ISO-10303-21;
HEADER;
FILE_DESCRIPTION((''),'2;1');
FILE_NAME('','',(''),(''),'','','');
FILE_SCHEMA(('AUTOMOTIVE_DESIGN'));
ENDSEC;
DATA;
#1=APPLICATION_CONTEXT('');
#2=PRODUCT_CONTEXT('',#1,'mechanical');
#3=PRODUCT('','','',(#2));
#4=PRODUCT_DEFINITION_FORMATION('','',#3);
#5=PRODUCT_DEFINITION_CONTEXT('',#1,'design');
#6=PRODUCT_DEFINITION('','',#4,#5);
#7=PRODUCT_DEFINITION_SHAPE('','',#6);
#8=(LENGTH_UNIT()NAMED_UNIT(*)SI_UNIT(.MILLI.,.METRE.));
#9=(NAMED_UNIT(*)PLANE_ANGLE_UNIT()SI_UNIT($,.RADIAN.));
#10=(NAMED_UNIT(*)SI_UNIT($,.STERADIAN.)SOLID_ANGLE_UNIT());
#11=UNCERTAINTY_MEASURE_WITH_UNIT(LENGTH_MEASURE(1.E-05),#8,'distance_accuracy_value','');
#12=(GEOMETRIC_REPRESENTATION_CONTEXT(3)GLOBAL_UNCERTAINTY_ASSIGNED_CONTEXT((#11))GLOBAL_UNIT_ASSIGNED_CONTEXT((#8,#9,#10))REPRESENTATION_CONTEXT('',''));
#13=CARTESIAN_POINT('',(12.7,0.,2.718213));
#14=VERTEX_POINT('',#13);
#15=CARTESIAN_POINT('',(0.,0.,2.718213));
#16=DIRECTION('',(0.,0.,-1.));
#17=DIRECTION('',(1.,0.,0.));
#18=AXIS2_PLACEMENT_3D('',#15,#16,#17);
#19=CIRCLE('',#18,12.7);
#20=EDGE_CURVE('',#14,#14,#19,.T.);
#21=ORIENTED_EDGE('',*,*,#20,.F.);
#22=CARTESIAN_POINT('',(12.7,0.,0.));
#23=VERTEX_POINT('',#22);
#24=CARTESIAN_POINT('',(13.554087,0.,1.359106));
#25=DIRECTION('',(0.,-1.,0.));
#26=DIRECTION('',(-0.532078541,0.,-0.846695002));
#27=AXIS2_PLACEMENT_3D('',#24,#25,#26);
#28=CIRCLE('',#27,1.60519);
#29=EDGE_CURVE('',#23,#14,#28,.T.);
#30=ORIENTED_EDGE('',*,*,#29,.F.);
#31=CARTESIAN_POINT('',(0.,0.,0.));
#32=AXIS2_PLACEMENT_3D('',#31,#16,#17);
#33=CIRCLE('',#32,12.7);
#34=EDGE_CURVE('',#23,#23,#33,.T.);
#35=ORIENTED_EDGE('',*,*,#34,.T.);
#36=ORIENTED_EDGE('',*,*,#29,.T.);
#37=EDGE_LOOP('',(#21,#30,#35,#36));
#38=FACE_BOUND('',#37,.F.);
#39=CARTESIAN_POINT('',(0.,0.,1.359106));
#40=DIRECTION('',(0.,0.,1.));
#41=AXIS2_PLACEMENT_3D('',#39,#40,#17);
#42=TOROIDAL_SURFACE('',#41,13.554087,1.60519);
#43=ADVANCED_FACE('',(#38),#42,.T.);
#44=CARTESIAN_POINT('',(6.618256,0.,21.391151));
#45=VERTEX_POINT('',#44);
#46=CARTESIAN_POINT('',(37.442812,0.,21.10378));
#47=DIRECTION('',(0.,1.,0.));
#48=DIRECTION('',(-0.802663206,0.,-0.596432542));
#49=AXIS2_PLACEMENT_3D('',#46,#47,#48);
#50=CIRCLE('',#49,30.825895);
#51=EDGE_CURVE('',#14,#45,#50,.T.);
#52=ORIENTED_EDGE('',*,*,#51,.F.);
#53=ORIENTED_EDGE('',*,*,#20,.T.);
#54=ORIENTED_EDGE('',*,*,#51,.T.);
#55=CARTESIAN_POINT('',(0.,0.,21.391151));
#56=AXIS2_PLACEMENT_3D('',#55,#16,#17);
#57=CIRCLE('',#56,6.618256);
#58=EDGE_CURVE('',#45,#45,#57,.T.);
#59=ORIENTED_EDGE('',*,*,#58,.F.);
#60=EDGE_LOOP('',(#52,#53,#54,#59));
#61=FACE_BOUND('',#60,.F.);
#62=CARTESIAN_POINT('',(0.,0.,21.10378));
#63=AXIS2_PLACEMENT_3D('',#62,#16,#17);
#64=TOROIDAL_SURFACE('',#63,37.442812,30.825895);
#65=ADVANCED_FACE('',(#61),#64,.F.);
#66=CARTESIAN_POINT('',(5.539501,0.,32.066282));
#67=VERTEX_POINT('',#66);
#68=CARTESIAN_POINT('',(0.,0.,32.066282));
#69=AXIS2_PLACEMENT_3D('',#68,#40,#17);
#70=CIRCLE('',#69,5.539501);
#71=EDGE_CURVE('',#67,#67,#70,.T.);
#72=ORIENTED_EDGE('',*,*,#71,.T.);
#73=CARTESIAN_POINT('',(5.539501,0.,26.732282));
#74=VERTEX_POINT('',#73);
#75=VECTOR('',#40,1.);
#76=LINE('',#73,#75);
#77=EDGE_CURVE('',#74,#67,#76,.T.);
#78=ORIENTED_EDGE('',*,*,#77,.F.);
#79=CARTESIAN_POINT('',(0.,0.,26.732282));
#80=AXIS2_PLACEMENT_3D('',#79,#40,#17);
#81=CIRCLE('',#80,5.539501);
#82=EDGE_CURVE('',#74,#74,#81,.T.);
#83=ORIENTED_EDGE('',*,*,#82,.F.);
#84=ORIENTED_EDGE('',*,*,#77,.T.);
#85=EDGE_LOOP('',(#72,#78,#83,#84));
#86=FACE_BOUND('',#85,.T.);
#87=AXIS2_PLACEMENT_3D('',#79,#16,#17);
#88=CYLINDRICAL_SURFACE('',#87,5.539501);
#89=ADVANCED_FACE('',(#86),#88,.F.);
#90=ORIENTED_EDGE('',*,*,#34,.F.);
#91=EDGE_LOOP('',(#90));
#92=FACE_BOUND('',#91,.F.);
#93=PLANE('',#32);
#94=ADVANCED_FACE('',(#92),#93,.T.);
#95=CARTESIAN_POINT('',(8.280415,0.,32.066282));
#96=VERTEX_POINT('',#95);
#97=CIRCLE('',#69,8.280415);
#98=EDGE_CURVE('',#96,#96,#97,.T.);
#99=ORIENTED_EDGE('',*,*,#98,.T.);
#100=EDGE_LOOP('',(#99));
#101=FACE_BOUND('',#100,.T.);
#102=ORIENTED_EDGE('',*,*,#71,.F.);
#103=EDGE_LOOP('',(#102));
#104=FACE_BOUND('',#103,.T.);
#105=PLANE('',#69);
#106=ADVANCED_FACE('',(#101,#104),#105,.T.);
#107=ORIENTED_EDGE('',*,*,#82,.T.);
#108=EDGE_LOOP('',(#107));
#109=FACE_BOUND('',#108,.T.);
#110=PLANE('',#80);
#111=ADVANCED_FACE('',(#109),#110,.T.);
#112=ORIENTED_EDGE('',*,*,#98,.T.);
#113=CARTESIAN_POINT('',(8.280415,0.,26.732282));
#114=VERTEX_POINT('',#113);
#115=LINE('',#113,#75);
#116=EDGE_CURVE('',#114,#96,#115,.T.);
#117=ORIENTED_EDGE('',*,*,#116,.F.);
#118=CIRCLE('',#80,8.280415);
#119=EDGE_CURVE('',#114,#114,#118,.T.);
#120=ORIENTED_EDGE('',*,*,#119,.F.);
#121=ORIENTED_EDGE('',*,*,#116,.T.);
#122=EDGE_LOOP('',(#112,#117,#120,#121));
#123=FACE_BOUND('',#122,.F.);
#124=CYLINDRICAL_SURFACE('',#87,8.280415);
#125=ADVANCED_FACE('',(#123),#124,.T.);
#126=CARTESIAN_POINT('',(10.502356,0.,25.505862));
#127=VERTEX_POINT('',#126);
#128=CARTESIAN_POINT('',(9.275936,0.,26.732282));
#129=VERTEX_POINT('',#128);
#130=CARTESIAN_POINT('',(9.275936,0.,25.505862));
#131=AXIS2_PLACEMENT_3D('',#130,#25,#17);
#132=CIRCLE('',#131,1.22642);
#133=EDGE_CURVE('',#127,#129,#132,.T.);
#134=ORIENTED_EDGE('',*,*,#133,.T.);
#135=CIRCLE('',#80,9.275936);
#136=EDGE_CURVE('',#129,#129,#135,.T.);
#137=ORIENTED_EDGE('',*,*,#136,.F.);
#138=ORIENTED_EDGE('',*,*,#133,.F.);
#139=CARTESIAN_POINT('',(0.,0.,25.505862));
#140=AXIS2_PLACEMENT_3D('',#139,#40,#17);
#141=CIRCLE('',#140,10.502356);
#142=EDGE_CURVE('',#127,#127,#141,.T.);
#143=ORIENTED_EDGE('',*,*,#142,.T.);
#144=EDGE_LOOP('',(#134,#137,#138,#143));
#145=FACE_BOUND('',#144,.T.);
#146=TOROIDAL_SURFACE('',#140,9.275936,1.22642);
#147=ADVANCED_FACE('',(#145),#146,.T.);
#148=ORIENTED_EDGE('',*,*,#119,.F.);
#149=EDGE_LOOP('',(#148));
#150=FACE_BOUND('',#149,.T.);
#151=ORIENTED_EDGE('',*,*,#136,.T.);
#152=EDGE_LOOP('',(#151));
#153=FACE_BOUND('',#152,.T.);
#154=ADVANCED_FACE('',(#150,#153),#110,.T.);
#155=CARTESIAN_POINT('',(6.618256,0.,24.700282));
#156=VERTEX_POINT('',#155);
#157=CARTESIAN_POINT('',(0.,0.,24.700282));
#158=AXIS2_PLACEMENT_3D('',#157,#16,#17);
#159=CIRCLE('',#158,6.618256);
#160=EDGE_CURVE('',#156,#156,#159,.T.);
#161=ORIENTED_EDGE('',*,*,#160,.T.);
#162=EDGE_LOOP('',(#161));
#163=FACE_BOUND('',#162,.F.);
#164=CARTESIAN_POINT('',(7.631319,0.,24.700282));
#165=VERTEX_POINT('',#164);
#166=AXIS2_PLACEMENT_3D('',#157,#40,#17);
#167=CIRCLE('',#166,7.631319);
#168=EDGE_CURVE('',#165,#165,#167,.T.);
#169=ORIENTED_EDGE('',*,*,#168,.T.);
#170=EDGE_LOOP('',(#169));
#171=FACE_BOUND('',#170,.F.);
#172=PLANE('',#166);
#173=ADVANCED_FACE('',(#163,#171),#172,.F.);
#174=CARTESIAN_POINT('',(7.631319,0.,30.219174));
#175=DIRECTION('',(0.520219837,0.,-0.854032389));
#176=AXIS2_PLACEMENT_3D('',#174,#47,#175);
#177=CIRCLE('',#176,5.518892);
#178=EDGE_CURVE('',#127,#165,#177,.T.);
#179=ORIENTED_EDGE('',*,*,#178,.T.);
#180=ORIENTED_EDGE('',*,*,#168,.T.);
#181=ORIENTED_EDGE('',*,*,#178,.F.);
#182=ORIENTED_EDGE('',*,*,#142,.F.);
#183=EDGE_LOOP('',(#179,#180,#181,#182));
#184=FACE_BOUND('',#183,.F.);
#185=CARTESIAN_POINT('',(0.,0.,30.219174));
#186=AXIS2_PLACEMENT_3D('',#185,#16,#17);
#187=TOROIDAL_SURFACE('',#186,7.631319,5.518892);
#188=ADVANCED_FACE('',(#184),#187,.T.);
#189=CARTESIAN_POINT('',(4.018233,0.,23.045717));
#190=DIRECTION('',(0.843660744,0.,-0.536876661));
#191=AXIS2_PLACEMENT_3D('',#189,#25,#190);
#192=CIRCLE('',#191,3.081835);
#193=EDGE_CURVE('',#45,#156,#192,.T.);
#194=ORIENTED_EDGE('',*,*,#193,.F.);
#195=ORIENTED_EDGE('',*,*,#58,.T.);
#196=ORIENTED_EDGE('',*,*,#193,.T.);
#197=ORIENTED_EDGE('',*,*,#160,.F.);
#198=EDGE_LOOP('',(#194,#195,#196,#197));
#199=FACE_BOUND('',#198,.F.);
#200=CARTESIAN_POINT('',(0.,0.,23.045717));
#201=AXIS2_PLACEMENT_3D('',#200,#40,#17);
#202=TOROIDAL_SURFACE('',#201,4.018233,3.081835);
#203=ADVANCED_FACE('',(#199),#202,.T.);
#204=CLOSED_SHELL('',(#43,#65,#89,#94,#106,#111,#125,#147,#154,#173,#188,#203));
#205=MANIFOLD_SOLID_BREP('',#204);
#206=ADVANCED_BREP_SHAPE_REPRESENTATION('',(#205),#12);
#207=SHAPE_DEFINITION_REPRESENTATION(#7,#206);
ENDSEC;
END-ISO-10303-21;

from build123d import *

# Parameters (mm, degrees)
F2_R     = 10.5023561171
F3_DEPTH = 2.032
F4_R     = 1.2264204897
F6_R     = 8.280415088
F6_R_2   = 5.5395009723
F7_DEPTH = 5.334


# Not quite as in the source:
# - a fillet or chamfer that OpenCascade refuses, or shapes differently, is made with other operations: its cross-section is extruded or revolved along the edge and cut away or added


with BuildPart() as f1:
    # F0 (on Front) → F1 (revolve)
    with BuildSketch(Plane.XZ):
        with BuildLine():
            Line((0, 24.7002821416), (0, 0))
            Line((0, 0), (12.7, 0))
            ThreePointArc((12.7, 0), (15.1592770153, 1.3591062743), (12.7, 2.7182125486))
            ThreePointArc((12.7, 2.7182125486), (8.1323573281, 11.5574154189), (6.618256215, 21.3911514729))
            ThreePointArc((6.618256215, 21.3911514729), (7.1000680202, 23.0457168072), (6.618256215, 24.7002821416))
            Line((6.618256215, 24.7002821416), (0, 24.7002821416))
        make_face()
    revolve(axis=Axis((0, 0, 12.3501410708), (0, 0, -1)))

    # F2 (on face) → F3 (join)
    with BuildSketch(Plane.XY.offset(24.7002821416)):
        Circle(F2_R)
    extrude(amount=F3_DEPTH)

    # F4
    f4_edges = [f1.edges().sort_by_distance(p)[0] for p in [
        (-10.502356, 0, 26.732282),
    ]]
    fillet(f4_edges, radius=F4_R)

    # F5: fillet of radius 5.5188922036 on 1 edges, made by hand

    # F5_s1 → F5_t2 (revolve, cut)
    with BuildSketch(Plane.XZ):
        with BuildLine():
            ThreePointArc((10.5023561171, 25.5058616519), (9.1222760715, 24.9054922023), (7.631318916, 24.7002821416))
            Line((7.631318916, 24.7002821416), (7.631318916, 24.5899042975))
            Line((7.631318916, 24.5899042975), (10.5023561171, 24.5899042975))
            Line((10.5023561171, 24.5899042975), (10.6127339612, 24.7002821416))
            ThreePointArc((10.6127339612, 24.7002821416), (10.6127339612, 25.1030718967), (10.5597768612, 25.411595398))
            Line((10.5597768612, 25.411595398), (10.5023561171, 25.5058616519))
        make_face()
    revolve(axis=Axis((0, 0, 24.7002821416), (0, 0, 1)), mode=Mode.SUBTRACT)

    # F6 (on face) → F7 (join)
    with BuildSketch(Plane.XY.offset(26.7322821416)):
        Circle(F6_R)
        Circle(F6_R_2, mode=Mode.SUBTRACT)
    extrude(amount=F7_DEPTH)


solid = f1.part
